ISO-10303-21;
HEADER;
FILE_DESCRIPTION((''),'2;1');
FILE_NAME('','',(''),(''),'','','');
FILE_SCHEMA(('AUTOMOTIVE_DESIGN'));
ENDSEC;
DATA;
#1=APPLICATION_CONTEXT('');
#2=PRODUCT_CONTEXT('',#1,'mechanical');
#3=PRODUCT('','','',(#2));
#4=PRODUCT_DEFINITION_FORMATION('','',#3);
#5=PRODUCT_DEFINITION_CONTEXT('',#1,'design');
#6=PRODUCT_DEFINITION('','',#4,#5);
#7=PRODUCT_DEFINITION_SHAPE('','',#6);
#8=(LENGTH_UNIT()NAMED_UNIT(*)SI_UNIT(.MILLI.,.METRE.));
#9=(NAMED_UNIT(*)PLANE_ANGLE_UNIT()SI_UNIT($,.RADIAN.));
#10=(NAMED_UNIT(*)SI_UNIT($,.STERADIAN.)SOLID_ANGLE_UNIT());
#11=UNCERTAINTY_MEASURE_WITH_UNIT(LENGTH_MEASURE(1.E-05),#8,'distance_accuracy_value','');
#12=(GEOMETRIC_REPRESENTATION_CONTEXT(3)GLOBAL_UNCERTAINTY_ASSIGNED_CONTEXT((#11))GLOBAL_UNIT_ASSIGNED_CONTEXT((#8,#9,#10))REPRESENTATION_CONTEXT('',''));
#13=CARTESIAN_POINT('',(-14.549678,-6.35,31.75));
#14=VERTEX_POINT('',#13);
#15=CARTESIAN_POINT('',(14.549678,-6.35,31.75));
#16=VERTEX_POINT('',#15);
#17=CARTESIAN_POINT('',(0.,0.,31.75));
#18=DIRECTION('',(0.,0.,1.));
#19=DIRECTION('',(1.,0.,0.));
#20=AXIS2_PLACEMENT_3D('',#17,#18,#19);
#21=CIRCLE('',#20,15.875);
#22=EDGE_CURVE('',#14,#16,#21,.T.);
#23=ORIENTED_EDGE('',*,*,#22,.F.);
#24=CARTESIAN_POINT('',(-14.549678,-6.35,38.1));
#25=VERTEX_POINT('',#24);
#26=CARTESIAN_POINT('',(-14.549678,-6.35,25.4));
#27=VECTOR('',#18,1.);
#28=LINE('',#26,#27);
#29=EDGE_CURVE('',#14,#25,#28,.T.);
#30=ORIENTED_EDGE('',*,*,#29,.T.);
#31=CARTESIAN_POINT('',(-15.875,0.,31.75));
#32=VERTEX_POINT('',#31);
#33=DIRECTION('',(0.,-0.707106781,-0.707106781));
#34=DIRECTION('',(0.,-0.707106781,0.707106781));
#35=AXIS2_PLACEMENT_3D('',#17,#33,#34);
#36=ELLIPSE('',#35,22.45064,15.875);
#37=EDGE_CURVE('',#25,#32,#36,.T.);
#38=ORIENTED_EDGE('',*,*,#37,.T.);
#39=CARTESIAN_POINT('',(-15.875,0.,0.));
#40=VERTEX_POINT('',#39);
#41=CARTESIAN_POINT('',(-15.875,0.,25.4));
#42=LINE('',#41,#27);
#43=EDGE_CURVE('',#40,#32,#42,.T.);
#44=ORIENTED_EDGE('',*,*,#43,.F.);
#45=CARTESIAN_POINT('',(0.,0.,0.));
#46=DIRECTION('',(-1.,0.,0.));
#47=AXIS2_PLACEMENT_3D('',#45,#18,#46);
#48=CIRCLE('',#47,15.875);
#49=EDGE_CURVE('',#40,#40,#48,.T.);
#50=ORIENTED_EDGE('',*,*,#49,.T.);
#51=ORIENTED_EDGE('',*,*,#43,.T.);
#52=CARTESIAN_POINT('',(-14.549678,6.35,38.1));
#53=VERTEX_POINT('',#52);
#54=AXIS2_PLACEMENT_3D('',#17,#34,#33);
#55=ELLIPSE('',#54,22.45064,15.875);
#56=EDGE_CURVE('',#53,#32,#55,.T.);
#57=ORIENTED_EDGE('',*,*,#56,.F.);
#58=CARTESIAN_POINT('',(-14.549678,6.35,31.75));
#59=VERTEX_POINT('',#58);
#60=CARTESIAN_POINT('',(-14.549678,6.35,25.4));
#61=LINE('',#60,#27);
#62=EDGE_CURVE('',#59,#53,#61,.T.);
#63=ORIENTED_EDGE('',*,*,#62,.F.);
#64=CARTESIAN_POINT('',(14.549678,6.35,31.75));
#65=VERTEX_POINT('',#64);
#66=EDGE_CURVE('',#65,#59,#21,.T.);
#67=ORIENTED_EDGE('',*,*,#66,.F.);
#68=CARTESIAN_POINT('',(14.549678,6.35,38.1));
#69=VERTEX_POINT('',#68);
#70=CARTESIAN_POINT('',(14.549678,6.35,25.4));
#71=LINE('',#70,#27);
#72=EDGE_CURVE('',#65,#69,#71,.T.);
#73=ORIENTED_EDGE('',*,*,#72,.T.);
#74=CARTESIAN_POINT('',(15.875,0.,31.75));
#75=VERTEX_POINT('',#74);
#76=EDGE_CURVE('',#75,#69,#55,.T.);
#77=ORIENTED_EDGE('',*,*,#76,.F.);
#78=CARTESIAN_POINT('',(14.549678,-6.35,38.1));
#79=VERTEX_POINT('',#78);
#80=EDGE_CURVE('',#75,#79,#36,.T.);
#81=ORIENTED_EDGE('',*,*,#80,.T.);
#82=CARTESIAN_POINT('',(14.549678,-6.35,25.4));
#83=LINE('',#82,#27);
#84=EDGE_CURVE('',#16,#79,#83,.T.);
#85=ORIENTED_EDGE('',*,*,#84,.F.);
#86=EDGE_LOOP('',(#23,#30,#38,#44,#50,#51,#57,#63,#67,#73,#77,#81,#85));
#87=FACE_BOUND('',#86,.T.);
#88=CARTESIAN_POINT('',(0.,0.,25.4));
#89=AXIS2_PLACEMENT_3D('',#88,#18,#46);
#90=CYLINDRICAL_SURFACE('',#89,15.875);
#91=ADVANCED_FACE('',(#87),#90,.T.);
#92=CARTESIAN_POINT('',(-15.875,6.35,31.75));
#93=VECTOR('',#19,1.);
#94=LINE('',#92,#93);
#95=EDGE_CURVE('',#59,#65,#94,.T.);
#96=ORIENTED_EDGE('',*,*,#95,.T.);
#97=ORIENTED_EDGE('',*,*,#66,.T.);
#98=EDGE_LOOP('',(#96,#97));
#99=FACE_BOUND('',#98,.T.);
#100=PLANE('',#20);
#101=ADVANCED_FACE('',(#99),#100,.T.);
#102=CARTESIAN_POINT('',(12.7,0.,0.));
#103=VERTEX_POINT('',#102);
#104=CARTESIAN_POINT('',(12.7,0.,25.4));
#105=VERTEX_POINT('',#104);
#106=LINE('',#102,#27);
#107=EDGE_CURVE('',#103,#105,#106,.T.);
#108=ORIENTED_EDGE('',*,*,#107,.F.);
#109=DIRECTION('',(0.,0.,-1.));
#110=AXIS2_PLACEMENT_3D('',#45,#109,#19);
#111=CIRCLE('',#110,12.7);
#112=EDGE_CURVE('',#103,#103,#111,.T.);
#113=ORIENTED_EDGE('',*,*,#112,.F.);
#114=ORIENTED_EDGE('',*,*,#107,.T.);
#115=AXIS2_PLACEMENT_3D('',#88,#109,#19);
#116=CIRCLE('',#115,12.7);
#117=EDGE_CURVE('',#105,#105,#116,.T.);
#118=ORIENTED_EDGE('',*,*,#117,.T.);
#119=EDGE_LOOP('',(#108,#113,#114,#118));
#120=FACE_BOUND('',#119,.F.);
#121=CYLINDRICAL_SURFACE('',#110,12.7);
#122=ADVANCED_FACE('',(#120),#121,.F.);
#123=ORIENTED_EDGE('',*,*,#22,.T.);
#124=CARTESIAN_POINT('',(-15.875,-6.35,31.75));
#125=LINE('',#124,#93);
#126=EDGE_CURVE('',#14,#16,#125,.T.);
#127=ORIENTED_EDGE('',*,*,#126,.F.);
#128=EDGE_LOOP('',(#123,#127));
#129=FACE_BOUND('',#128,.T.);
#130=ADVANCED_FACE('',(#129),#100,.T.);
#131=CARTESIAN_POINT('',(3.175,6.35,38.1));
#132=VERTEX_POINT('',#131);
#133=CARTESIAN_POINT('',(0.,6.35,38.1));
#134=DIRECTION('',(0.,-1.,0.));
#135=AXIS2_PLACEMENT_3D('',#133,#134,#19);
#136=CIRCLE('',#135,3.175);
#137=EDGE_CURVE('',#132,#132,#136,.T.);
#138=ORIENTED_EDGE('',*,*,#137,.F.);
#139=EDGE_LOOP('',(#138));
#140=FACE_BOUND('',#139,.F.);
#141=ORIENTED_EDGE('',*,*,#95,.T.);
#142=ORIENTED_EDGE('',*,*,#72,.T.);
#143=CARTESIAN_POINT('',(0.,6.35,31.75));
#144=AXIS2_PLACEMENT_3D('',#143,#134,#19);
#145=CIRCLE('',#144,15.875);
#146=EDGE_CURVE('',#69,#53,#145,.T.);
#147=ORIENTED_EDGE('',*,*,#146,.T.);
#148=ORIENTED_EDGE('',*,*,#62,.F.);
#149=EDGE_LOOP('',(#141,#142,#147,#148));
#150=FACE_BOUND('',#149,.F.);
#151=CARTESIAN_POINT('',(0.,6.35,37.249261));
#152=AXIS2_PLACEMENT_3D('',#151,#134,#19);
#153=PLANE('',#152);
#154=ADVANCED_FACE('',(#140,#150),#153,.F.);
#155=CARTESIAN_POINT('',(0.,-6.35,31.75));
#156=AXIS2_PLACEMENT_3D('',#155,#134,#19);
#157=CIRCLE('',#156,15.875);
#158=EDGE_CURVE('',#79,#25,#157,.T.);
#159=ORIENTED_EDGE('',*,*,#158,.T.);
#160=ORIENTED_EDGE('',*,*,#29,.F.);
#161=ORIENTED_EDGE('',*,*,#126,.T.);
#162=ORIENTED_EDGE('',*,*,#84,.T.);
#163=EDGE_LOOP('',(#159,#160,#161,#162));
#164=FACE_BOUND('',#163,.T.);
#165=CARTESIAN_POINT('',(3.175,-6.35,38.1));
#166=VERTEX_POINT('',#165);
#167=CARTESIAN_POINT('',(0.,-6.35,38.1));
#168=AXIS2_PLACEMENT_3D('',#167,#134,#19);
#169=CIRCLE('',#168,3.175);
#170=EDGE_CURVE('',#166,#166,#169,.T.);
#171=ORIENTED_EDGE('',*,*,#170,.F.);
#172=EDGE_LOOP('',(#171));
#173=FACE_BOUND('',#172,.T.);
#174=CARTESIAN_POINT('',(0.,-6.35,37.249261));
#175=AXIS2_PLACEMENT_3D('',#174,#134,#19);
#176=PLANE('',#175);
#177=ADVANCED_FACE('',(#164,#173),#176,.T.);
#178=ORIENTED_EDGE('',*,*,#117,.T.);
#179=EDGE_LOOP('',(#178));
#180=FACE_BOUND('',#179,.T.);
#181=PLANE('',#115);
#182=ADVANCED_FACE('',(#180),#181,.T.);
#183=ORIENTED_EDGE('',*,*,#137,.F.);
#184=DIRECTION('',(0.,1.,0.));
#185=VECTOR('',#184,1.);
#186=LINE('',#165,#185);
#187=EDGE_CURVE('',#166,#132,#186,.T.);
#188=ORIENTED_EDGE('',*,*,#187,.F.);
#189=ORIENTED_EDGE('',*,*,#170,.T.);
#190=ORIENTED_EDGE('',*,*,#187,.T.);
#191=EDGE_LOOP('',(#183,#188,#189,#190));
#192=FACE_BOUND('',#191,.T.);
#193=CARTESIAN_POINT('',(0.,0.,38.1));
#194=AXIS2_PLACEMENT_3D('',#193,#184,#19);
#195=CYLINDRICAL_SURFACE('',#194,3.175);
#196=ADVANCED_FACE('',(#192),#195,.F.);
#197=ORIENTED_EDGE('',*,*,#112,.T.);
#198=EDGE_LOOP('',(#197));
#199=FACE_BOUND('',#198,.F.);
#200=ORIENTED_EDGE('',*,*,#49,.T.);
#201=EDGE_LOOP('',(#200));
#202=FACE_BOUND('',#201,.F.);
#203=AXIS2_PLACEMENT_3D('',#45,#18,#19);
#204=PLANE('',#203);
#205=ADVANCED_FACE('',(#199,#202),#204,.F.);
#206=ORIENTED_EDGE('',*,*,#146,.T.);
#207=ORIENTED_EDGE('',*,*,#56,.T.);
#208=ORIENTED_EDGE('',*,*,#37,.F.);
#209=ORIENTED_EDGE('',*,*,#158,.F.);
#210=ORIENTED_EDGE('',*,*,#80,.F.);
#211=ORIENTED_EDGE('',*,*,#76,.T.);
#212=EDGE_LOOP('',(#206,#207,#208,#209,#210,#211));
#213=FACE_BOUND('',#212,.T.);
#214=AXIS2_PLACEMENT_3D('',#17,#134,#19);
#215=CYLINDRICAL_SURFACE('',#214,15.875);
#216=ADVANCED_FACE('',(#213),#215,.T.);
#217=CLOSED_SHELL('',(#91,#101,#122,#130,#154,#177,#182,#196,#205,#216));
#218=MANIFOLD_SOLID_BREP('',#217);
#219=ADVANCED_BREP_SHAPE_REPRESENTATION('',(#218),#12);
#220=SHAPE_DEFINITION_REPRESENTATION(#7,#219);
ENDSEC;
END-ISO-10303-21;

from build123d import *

# Parameters (mm, degrees)
F0_R          = 15.875
F1_DEPTH      = 31.75
F2_R          = 12.7
F3_DEPTH      = 25.4
F4_R          = 3.175
F5_DEPTH      = 6.35
F5_DEPTH_BACK = 6.35
F6_W          = 11.146276543
F6_H          = 50.8


# Not quite as in the source:
# - after a boolean that leaves OpenCascade's solid faulty, fix() repairs it


with BuildPart() as f1:
    # F0 (on Top) → F1 (new body)
    with BuildSketch(Plane.XY):
        Circle(F0_R)
    extrude(amount=F1_DEPTH)

    # F2 (on face) → F3 (cut)
    with BuildSketch(Plane(origin=(0, 0, 0), x_dir=(1, 0, 0), z_dir=(0, 0, -1))):
        Circle(F2_R)
    extrude(amount=-F3_DEPTH, mode=Mode.SUBTRACT)

    # F4 (on Front) → F5 (join, two sides)
    with BuildSketch(Plane.XZ) as f5_sk:
        with BuildLine():
            ThreePointArc((15.875, 31.75), (0, 47.625), (-15.875, 31.75))
            Line((-15.875, 31.75), (15.875, 31.75))
        make_face()
        with Locations((0, 38.1)):
            Circle(F4_R, mode=Mode.SUBTRACT)
    extrude(amount=F5_DEPTH)
    extrude(f5_sk.sketch, amount=-F5_DEPTH_BACK)

    # F6 (on Front) → F7 (revolve, cut)
    with BuildSketch(Plane.XZ):
        with Locations((-21.4481382715, 25.4)):
            Rectangle(F6_W, F6_H)
    revolve(axis=Axis((0, 0, 12.5730000436), (0, 0, 1)), mode=Mode.SUBTRACT)

    add(f1.part.fix(), mode=Mode.REPLACE)


solid = f1.part
